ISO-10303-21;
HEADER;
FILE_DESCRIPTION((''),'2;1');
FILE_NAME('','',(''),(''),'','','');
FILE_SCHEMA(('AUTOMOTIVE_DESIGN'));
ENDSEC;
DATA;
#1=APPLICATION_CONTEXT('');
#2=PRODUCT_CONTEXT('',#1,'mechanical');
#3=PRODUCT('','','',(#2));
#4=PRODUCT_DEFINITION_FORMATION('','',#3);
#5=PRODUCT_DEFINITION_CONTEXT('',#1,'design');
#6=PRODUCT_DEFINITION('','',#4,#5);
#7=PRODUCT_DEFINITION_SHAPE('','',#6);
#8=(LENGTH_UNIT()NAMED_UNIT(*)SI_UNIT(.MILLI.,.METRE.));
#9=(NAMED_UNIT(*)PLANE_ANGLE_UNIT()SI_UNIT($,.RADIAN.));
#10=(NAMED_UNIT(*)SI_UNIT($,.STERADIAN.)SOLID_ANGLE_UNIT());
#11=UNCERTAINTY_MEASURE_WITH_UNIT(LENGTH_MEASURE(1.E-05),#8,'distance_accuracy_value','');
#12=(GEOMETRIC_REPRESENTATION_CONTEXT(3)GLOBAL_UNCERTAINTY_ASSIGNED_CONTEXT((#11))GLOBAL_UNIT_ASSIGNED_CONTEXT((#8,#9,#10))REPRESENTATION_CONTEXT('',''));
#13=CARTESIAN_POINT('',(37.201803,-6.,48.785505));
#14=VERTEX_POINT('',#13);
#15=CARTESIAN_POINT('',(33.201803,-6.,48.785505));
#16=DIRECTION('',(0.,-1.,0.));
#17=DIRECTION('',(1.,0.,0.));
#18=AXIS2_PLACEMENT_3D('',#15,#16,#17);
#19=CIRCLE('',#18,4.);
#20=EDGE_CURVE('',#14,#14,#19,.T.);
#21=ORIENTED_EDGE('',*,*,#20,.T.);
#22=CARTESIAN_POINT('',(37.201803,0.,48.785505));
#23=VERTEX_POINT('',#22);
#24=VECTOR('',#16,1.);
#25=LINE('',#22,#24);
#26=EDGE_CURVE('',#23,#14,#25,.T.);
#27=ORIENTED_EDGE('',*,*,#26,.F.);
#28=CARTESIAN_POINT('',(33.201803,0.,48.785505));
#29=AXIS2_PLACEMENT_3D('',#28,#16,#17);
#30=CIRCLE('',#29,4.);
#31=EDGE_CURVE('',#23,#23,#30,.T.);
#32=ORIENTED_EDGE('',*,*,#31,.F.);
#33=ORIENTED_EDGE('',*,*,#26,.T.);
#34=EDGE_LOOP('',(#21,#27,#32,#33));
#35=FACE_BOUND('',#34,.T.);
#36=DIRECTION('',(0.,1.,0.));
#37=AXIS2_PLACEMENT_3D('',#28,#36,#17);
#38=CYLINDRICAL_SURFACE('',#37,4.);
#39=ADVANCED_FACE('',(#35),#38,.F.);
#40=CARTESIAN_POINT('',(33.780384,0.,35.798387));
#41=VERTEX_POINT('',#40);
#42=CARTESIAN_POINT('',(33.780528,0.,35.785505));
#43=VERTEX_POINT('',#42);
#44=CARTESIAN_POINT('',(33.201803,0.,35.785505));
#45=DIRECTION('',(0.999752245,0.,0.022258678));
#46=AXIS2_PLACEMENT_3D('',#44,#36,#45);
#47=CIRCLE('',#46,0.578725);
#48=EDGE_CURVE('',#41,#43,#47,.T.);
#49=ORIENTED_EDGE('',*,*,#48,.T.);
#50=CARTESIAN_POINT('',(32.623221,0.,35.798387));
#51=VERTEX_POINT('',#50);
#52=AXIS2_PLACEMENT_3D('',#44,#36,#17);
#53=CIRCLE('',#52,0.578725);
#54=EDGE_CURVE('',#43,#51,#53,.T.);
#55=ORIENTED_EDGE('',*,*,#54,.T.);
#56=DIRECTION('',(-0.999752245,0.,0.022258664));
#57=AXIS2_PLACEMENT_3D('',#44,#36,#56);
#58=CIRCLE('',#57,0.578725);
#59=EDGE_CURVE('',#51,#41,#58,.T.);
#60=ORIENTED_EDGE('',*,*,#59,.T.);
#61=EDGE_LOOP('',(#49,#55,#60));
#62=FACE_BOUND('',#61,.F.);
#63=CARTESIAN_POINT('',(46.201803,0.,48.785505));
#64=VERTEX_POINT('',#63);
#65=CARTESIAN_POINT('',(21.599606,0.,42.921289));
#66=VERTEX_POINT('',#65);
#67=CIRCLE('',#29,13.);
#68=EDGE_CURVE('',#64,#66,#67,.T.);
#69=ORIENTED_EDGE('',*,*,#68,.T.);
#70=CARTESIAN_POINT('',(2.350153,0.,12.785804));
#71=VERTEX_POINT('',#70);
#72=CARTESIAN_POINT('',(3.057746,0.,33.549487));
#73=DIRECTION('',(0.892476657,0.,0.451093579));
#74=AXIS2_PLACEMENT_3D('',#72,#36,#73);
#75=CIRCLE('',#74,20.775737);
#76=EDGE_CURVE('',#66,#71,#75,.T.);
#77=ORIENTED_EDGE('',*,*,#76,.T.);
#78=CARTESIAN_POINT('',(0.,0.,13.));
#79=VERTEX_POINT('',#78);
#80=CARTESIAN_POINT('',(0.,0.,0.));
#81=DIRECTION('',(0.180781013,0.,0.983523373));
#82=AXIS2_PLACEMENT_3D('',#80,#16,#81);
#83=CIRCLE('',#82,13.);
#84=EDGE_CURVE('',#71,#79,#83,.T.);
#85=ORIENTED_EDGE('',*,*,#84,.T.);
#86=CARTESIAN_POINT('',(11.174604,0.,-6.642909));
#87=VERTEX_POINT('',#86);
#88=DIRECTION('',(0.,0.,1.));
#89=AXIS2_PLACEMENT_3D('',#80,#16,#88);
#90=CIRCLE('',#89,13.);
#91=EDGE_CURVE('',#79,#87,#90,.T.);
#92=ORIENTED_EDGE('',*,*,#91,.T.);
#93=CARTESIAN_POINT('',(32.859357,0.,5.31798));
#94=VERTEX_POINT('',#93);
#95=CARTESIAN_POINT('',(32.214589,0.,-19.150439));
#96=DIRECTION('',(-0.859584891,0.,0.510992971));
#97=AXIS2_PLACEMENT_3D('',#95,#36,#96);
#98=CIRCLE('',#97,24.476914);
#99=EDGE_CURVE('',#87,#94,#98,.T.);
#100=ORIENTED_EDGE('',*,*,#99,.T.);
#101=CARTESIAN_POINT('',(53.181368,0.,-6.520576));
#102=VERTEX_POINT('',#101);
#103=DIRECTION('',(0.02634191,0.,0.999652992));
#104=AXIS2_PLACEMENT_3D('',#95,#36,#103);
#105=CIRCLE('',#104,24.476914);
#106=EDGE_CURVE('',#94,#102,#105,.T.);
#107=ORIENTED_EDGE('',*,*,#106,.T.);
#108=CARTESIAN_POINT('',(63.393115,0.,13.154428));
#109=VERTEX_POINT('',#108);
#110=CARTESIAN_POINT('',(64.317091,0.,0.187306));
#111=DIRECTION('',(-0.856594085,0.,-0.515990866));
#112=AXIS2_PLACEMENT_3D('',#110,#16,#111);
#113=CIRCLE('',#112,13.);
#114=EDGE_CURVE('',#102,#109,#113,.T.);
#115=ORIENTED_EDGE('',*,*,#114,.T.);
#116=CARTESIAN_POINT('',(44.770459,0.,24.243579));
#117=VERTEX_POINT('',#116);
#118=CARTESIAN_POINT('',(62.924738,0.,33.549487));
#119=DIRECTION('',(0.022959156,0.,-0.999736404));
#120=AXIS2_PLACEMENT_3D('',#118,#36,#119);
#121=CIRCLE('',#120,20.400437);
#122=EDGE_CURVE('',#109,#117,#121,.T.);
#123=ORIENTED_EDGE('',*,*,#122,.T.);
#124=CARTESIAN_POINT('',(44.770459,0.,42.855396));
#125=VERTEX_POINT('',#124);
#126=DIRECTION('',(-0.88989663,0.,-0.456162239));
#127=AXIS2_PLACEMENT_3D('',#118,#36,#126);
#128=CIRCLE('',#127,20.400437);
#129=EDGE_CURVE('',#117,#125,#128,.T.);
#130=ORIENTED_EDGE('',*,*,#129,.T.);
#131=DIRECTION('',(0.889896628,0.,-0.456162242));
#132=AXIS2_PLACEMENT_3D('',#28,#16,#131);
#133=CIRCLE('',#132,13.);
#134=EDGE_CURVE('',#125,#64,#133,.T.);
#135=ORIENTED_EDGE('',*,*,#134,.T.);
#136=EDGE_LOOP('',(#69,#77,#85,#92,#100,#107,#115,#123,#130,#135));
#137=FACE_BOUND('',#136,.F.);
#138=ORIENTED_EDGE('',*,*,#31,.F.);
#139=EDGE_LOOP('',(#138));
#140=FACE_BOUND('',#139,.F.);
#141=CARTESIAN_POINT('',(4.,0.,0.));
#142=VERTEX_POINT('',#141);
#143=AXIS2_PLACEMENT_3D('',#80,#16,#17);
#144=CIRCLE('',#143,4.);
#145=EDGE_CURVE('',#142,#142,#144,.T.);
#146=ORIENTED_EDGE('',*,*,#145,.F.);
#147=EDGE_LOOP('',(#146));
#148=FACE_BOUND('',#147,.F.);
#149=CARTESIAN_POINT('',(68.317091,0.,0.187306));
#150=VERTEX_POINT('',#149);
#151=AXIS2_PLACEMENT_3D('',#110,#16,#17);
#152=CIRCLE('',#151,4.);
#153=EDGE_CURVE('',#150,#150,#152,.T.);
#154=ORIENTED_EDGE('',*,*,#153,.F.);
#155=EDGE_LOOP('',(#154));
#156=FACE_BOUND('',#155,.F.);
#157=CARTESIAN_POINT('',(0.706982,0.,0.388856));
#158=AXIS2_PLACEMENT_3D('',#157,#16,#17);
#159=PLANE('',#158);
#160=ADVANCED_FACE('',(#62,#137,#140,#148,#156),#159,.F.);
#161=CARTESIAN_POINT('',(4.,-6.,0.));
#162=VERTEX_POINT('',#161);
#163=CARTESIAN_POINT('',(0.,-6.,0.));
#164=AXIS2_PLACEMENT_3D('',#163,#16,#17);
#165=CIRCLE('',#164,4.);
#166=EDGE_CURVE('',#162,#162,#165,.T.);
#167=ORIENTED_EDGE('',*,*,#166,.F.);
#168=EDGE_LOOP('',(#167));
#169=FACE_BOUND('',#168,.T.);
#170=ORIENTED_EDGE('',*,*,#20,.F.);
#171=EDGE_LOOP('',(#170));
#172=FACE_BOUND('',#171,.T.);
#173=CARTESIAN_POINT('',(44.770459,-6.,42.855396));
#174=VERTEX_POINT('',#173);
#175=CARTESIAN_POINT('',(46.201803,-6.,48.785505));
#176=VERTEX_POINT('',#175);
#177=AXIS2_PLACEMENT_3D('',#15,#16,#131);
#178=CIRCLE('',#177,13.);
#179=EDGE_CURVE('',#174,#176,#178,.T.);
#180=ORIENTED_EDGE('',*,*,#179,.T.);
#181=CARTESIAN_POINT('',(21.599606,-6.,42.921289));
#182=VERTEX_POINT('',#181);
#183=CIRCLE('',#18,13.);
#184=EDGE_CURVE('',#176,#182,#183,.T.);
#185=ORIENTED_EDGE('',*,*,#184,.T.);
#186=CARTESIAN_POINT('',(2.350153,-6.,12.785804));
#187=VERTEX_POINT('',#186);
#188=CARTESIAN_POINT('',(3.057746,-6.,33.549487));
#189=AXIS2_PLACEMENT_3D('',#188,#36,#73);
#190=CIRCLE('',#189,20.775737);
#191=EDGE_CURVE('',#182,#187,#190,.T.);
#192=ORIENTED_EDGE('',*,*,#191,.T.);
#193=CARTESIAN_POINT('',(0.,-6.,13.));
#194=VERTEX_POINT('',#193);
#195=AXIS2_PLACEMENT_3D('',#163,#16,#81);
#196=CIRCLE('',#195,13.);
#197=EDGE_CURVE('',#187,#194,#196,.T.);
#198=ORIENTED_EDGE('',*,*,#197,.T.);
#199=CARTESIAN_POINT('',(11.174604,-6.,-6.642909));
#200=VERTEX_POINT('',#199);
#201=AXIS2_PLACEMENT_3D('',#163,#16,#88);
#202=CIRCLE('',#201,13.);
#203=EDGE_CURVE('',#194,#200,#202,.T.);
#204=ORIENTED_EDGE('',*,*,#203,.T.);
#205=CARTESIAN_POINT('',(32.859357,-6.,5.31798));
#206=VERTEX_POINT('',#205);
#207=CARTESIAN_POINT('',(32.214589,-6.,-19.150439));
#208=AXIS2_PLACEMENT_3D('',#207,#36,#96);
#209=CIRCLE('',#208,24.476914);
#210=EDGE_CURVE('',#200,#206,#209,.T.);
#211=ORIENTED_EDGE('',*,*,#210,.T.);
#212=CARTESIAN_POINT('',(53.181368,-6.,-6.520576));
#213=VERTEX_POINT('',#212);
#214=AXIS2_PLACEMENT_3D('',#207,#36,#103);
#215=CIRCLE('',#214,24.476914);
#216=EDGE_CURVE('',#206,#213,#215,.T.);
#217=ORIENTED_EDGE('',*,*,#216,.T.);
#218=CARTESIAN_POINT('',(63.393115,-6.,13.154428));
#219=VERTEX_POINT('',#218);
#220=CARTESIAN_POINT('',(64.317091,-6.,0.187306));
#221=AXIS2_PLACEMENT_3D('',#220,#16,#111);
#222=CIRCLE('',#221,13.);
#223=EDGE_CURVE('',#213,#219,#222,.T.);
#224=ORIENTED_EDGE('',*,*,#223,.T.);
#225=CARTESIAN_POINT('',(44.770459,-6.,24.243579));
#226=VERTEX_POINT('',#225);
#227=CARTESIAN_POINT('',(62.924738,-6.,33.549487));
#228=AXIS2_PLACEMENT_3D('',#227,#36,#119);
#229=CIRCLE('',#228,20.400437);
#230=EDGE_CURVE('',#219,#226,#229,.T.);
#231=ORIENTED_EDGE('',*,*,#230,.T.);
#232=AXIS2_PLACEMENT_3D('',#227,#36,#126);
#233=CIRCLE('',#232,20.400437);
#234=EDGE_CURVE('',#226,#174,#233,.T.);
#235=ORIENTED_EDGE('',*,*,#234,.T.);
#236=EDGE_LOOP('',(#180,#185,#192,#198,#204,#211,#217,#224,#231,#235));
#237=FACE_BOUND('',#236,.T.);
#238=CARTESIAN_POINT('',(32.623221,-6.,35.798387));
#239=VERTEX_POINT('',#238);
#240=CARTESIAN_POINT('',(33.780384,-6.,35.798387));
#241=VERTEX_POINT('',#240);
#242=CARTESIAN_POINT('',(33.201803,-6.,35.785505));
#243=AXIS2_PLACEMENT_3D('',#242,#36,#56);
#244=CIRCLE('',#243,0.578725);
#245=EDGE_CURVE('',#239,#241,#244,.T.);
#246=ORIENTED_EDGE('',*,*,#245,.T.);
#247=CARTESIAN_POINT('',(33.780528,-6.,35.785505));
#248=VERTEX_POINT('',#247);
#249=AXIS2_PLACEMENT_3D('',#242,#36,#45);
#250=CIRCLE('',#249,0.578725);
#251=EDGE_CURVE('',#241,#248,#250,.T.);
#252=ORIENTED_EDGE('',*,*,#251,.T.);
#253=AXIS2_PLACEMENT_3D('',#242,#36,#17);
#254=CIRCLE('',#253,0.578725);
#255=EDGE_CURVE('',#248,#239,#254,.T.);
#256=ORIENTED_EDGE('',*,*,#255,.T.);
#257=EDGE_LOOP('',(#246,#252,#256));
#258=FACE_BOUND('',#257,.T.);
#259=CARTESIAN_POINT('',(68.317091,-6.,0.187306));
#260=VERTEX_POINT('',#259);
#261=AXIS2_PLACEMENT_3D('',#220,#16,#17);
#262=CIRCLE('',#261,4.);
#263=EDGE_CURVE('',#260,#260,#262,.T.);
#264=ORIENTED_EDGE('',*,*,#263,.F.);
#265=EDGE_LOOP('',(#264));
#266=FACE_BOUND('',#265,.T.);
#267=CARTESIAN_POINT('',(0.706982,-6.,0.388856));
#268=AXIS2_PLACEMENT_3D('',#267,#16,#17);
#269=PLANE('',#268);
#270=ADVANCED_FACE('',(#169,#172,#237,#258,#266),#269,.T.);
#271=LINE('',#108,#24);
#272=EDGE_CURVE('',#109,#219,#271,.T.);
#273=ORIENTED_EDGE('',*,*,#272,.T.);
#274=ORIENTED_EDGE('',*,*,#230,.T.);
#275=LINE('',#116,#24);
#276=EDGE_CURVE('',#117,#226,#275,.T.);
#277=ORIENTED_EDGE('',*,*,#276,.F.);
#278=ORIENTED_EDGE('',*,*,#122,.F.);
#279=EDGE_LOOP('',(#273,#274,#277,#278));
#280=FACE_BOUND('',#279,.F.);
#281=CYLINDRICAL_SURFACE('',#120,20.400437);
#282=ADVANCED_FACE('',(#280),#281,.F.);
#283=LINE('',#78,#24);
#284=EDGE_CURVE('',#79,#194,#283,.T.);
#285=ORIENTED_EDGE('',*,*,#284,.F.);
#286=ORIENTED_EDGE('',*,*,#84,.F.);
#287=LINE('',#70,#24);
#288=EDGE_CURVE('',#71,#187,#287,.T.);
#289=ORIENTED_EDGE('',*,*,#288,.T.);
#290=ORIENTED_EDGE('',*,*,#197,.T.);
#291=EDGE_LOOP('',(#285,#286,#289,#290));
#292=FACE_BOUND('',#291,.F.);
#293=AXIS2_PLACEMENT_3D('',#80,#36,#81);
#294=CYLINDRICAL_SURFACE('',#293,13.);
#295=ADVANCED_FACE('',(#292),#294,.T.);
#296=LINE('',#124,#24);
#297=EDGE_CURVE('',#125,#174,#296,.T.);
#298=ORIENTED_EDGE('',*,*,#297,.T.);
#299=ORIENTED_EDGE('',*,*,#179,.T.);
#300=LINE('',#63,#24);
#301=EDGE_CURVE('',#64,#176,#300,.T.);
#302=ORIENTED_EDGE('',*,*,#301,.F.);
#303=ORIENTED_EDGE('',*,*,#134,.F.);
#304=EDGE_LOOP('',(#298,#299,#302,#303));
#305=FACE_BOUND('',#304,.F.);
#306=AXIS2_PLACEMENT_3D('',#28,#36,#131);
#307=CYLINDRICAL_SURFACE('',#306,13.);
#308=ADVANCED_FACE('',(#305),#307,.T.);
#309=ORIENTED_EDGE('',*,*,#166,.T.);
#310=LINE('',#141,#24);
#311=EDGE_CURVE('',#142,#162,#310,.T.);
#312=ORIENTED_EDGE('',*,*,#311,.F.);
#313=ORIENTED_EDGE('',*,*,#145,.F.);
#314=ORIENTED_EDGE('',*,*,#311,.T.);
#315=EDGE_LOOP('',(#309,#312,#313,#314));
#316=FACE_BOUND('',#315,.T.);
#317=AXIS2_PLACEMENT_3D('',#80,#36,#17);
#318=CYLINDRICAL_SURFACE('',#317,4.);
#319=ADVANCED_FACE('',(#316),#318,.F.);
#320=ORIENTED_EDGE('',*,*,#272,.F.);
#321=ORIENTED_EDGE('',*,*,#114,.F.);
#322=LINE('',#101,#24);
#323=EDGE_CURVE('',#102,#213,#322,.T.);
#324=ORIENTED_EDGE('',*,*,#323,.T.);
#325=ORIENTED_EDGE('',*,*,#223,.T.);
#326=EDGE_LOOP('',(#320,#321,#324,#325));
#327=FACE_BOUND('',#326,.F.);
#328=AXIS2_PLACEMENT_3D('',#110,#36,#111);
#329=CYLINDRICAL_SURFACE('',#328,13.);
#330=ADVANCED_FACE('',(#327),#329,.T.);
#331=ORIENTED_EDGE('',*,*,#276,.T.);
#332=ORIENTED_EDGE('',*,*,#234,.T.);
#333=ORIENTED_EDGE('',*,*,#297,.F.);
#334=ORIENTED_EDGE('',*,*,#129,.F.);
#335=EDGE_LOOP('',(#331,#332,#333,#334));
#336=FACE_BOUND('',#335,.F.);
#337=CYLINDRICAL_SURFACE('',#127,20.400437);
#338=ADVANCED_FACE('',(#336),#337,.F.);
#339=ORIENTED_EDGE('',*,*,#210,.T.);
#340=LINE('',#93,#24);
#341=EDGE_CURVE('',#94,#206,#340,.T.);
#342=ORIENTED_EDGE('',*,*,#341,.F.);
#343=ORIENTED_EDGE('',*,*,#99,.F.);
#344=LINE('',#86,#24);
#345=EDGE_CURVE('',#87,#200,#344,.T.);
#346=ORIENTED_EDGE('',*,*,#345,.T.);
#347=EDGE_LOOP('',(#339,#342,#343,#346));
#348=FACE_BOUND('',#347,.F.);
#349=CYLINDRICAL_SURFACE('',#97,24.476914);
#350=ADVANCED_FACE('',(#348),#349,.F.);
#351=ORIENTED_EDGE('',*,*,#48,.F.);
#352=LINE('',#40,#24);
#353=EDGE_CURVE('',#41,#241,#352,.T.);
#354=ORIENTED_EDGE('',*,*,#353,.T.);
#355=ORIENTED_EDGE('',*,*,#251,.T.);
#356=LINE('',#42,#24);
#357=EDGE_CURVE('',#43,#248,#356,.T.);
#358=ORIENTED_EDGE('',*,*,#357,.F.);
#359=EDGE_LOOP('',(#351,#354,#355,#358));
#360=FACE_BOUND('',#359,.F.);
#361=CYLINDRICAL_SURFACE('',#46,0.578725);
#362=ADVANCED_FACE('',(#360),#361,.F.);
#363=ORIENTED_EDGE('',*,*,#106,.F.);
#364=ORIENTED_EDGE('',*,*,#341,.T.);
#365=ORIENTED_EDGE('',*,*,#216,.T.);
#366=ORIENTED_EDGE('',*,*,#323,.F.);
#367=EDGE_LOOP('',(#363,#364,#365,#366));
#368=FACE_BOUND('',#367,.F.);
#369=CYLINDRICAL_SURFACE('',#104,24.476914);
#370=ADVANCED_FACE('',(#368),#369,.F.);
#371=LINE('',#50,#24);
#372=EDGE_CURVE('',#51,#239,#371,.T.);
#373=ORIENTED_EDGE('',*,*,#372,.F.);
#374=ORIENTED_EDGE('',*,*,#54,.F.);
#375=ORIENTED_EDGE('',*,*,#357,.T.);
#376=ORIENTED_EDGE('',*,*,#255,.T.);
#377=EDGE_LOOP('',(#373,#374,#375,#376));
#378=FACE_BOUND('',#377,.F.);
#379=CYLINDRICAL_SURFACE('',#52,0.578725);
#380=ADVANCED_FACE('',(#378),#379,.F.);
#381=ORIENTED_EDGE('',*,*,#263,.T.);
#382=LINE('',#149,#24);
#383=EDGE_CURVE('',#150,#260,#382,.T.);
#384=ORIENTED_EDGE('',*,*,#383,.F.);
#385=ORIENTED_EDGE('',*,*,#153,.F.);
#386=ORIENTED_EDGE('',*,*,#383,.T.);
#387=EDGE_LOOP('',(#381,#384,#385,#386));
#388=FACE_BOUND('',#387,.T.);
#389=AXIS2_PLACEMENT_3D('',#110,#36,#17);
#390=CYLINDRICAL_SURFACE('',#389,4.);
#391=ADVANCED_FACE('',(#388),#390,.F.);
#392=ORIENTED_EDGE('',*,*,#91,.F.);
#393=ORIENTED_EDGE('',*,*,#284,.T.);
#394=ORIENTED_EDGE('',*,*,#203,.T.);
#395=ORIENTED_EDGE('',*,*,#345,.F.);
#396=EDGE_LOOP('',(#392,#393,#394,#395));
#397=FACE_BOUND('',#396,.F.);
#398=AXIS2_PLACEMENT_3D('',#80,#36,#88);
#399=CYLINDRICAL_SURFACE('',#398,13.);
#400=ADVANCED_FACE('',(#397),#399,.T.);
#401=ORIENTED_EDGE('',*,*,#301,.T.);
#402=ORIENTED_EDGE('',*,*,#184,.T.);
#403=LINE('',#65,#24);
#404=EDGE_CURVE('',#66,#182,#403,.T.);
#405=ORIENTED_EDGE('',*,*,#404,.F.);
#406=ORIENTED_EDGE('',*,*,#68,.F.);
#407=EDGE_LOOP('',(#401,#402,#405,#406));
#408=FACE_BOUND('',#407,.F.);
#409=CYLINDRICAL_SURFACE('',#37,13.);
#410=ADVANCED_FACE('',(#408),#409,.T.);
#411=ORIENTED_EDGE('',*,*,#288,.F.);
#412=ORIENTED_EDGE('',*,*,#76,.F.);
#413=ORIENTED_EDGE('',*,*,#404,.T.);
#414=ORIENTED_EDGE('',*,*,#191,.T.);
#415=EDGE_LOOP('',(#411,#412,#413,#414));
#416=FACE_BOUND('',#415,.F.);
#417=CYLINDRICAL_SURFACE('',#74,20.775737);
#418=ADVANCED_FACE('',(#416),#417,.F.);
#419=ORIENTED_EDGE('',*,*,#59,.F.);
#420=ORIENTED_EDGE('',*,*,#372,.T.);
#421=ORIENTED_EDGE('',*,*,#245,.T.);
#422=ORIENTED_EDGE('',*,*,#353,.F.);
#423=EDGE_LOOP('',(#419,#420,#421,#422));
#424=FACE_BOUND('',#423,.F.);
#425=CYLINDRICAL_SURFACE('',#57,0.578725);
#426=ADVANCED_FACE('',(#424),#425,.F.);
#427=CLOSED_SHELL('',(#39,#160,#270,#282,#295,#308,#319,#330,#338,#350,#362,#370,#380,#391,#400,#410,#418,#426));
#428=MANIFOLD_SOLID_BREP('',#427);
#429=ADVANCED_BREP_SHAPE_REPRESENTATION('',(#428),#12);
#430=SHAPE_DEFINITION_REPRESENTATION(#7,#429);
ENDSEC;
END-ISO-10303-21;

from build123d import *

# Parameters (mm, degrees)
F0_R     = 9.5
F0_R_2   = 4
F1_DEPTH = 6


with BuildPart() as f1:
    # F0 (on Front) → F1 (new body)
    with BuildSketch(Plane.XZ):
        with BuildLine():
            ThreePointArc((2.350153171, 12.7858038493), (1.1720328397, 12.8595060447), (0, 13))
            ThreePointArc((0, 13), (-11.2995091051, -6.4281485658), (11.1746035767, -6.6429086178))
            ThreePointArc((11.1746035767, -6.6429086178), (12.5353469536, -3.4445720709), (13, 0))
            ThreePointArc((13, 0), (9.9887935013, 8.320096417), (2.350153171, 12.7858038493))
        make_face()
        Circle(F0_R, mode=Mode.SUBTRACT)
        with BuildLine():
            ThreePointArc((2.350153171, 12.7858038493), (1.179947024, 12.9463402172), (0, 13))
            ThreePointArc((0, 13), (1.1720328397, 12.8595060447), (2.350153171, 12.7858038493))
        make_face()
        with BuildLine():
            ThreePointArc((13, 0), (12.5353469536, -3.4445720709), (11.1746035767, -6.6429086178))
            ThreePointArc((11.1746035767, -6.6429086178), (20.3927051131, 2.2823011589), (32.8593572911, 5.3179804839))
            ThreePointArc((32.8593572911, 5.3179804839), (22.0397803989, 11.649441895), (21.5996059124, 24.1776857522))
            ThreePointArc((21.5996059124, 24.1776857522), (13.63881463, 15.6701075209), (2.350153171, 12.7858038493))
            ThreePointArc((2.350153171, 12.7858038493), (9.9887935013, 8.320096417), (13, 0))
        make_face()
        with BuildLine():
            ThreePointArc((21.5996059124, 24.1776857522), (22.0397803989, 11.649441895), (32.8593572911, 5.3179804839))
            ThreePointArc((32.8593572911, 5.3179804839), (42.272310005, 9.0007955279), (46.2018025219, 18.3134693652))
            ThreePointArc((46.2018025219, 18.3134693652), (45.8389012751, 21.3636718342), (44.7704586601, 24.243578568))
            ThreePointArc((44.7704586601, 24.243578568), (33.1648335269, 31.3134167995), (21.5996059124, 24.1776857522))
        make_face()
        with BuildLine():
            ThreePointArc((46.2018025219, 18.3134693652), (42.272310005, 9.0007955279), (32.8593572911, 5.3179804839))
            ThreePointArc((32.8593572911, 5.3179804839), (44.5354086005, 1.9994233392), (53.1813680275, -6.5205755628))
            ThreePointArc((53.1813680275, -6.5205755628), (52.7786540902, 6.1760009355), (63.3931152108, 13.154428295))
            ThreePointArc((63.3931152108, 13.154428295), (52.487300782, 16.0212898755), (44.7704586601, 24.243578568))
            ThreePointArc((44.7704586601, 24.243578568), (45.8389012751, 21.3636718342), (46.2018025219, 18.3134693652))
        make_face()
        with BuildLine():
            ThreePointArc((21.5996059834, 42.9212888668), (23.8334826654, 33.549487301), (21.5996059124, 24.1776857522))
            ThreePointArc((21.5996059124, 24.1776857522), (33.1648335269, 31.3134167995), (44.7704586601, 24.243578568))
            ThreePointArc((44.7704586601, 24.243578568), (42.5243018444, 33.5494874141), (44.7704586914, 42.8553962526))
            ThreePointArc((44.7704586914, 42.8553962526), (40.2259887899, 37.846547159), (33.7803843902, 35.7983870449))
            ThreePointArc((33.7803843902, 35.7983870449), (33.7804919256, 35.7919466185), (33.7805277722, 35.7855053943))
            ThreePointArc((33.7805277722, 35.7855053943), (33.1953612977, 35.2068159906), (32.6232206536, 35.7983870449))
            ThreePointArc((32.6232206536, 35.7983870449), (26.1465368827, 37.8665664916), (21.5996059834, 42.9212888668))
        make_face()
        with BuildLine():
            ThreePointArc((63.3931152108, 13.154428295), (52.7786540902, 6.1760009355), (53.1813680275, -6.5205755628))
            ThreePointArc((53.1813680275, -6.5205755628), (67.7981541622, -12.3379567831), (77.3170911302, 0.1873056959))
            ThreePointArc((77.3170911302, 0.1873056959), (73.176783931, 9.7007616124), (63.3931152108, 13.154428295))
        make_face()
        with Locations((64.3170911302, 0.1873056959)):
            Circle(F0_R, mode=Mode.SUBTRACT)
        with BuildLine():
            ThreePointArc((46.2018025219, 48.7855053943), (30.1875492977, 61.4312271017), (21.5996059834, 42.9212888668))
            ThreePointArc((21.5996059834, 42.9212888668), (26.1465368827, 37.8665664916), (32.6232206536, 35.7983870449))
            ThreePointArc((32.6232206536, 35.7983870449), (33.2018025219, 36.3642306445), (33.7803843902, 35.7983870449))
            ThreePointArc((33.7803843902, 35.7983870449), (40.2259887899, 37.846547159), (44.7704586914, 42.8553962526))
            ThreePointArc((44.7704586914, 42.8553962526), (45.8389012832, 45.7353029587), (46.2018025219, 48.7855053943))
        make_face()
        with Locations((33.2018025219, 48.7855053943)):
            Circle(F0_R, mode=Mode.SUBTRACT)
        with Locations((33.2018025219, 48.7855053943)):
            Circle(F0_R)
        with Locations((33.2018025219, 48.7855053943)):
            Circle(F0_R_2, mode=Mode.SUBTRACT)
        Circle(F0_R)
        Circle(F0_R_2, mode=Mode.SUBTRACT)
        with Locations((64.3170911302, 0.1873056959)):
            Circle(F0_R)
        with Locations((64.3170911302, 0.1873056959)):
            Circle(F0_R_2, mode=Mode.SUBTRACT)
    extrude(amount=F1_DEPTH)


solid = f1.part
